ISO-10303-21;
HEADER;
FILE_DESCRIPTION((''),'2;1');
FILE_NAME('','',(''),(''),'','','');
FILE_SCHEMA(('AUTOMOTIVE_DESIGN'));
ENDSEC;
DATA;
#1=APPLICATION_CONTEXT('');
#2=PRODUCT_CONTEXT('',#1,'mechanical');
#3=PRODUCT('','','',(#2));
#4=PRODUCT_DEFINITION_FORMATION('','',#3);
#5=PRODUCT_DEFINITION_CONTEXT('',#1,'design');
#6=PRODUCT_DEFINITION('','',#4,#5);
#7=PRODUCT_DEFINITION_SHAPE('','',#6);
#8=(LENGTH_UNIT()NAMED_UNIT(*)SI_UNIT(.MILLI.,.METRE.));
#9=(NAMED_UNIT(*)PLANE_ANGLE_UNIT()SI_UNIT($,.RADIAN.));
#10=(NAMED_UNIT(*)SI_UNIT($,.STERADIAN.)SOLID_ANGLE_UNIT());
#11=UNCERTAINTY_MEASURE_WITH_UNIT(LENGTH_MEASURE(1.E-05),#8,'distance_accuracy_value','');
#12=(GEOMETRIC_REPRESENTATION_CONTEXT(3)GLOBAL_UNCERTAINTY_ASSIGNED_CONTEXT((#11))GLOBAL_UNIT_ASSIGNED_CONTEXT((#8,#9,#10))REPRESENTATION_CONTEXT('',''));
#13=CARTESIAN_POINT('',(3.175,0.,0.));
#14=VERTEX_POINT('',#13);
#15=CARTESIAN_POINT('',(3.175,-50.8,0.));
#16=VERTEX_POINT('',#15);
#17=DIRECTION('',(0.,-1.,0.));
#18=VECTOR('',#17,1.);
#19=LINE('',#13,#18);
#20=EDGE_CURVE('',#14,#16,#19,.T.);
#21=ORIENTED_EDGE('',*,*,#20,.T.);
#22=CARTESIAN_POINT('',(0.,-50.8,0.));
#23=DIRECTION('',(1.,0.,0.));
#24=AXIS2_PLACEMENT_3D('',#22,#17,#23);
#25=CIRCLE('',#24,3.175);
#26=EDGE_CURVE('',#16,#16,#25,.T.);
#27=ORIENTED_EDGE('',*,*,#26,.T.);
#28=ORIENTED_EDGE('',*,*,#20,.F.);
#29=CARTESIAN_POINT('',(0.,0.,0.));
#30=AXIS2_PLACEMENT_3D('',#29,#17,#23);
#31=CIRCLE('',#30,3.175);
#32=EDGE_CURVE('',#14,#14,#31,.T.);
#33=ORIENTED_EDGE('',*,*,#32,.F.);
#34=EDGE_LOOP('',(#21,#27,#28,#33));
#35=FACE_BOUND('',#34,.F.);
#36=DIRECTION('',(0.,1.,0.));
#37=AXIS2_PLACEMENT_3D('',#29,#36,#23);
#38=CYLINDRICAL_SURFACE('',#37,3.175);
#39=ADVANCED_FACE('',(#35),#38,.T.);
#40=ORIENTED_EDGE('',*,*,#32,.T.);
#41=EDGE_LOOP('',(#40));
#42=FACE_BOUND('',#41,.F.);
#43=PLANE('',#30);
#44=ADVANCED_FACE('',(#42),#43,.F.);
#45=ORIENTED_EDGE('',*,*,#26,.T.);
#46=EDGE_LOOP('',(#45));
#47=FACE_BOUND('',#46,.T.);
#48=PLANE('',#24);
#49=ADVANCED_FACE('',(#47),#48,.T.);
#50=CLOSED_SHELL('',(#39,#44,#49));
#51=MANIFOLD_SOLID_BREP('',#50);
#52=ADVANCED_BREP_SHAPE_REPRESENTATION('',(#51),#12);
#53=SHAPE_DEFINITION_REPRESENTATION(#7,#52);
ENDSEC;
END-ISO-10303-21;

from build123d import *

# Parameters (mm, degrees)
F0_R     = 3.175
F1_DEPTH = 50.8


# Not quite as in the source:
# - a feature names something its author has since deleted; it is built from what else it names


with BuildPart() as f1:
    # F0 (on Front) → F1 (new body)
    with BuildSketch(Plane.XZ):
        Circle(F0_R)
    extrude(amount=F1_DEPTH)


solid = f1.part
